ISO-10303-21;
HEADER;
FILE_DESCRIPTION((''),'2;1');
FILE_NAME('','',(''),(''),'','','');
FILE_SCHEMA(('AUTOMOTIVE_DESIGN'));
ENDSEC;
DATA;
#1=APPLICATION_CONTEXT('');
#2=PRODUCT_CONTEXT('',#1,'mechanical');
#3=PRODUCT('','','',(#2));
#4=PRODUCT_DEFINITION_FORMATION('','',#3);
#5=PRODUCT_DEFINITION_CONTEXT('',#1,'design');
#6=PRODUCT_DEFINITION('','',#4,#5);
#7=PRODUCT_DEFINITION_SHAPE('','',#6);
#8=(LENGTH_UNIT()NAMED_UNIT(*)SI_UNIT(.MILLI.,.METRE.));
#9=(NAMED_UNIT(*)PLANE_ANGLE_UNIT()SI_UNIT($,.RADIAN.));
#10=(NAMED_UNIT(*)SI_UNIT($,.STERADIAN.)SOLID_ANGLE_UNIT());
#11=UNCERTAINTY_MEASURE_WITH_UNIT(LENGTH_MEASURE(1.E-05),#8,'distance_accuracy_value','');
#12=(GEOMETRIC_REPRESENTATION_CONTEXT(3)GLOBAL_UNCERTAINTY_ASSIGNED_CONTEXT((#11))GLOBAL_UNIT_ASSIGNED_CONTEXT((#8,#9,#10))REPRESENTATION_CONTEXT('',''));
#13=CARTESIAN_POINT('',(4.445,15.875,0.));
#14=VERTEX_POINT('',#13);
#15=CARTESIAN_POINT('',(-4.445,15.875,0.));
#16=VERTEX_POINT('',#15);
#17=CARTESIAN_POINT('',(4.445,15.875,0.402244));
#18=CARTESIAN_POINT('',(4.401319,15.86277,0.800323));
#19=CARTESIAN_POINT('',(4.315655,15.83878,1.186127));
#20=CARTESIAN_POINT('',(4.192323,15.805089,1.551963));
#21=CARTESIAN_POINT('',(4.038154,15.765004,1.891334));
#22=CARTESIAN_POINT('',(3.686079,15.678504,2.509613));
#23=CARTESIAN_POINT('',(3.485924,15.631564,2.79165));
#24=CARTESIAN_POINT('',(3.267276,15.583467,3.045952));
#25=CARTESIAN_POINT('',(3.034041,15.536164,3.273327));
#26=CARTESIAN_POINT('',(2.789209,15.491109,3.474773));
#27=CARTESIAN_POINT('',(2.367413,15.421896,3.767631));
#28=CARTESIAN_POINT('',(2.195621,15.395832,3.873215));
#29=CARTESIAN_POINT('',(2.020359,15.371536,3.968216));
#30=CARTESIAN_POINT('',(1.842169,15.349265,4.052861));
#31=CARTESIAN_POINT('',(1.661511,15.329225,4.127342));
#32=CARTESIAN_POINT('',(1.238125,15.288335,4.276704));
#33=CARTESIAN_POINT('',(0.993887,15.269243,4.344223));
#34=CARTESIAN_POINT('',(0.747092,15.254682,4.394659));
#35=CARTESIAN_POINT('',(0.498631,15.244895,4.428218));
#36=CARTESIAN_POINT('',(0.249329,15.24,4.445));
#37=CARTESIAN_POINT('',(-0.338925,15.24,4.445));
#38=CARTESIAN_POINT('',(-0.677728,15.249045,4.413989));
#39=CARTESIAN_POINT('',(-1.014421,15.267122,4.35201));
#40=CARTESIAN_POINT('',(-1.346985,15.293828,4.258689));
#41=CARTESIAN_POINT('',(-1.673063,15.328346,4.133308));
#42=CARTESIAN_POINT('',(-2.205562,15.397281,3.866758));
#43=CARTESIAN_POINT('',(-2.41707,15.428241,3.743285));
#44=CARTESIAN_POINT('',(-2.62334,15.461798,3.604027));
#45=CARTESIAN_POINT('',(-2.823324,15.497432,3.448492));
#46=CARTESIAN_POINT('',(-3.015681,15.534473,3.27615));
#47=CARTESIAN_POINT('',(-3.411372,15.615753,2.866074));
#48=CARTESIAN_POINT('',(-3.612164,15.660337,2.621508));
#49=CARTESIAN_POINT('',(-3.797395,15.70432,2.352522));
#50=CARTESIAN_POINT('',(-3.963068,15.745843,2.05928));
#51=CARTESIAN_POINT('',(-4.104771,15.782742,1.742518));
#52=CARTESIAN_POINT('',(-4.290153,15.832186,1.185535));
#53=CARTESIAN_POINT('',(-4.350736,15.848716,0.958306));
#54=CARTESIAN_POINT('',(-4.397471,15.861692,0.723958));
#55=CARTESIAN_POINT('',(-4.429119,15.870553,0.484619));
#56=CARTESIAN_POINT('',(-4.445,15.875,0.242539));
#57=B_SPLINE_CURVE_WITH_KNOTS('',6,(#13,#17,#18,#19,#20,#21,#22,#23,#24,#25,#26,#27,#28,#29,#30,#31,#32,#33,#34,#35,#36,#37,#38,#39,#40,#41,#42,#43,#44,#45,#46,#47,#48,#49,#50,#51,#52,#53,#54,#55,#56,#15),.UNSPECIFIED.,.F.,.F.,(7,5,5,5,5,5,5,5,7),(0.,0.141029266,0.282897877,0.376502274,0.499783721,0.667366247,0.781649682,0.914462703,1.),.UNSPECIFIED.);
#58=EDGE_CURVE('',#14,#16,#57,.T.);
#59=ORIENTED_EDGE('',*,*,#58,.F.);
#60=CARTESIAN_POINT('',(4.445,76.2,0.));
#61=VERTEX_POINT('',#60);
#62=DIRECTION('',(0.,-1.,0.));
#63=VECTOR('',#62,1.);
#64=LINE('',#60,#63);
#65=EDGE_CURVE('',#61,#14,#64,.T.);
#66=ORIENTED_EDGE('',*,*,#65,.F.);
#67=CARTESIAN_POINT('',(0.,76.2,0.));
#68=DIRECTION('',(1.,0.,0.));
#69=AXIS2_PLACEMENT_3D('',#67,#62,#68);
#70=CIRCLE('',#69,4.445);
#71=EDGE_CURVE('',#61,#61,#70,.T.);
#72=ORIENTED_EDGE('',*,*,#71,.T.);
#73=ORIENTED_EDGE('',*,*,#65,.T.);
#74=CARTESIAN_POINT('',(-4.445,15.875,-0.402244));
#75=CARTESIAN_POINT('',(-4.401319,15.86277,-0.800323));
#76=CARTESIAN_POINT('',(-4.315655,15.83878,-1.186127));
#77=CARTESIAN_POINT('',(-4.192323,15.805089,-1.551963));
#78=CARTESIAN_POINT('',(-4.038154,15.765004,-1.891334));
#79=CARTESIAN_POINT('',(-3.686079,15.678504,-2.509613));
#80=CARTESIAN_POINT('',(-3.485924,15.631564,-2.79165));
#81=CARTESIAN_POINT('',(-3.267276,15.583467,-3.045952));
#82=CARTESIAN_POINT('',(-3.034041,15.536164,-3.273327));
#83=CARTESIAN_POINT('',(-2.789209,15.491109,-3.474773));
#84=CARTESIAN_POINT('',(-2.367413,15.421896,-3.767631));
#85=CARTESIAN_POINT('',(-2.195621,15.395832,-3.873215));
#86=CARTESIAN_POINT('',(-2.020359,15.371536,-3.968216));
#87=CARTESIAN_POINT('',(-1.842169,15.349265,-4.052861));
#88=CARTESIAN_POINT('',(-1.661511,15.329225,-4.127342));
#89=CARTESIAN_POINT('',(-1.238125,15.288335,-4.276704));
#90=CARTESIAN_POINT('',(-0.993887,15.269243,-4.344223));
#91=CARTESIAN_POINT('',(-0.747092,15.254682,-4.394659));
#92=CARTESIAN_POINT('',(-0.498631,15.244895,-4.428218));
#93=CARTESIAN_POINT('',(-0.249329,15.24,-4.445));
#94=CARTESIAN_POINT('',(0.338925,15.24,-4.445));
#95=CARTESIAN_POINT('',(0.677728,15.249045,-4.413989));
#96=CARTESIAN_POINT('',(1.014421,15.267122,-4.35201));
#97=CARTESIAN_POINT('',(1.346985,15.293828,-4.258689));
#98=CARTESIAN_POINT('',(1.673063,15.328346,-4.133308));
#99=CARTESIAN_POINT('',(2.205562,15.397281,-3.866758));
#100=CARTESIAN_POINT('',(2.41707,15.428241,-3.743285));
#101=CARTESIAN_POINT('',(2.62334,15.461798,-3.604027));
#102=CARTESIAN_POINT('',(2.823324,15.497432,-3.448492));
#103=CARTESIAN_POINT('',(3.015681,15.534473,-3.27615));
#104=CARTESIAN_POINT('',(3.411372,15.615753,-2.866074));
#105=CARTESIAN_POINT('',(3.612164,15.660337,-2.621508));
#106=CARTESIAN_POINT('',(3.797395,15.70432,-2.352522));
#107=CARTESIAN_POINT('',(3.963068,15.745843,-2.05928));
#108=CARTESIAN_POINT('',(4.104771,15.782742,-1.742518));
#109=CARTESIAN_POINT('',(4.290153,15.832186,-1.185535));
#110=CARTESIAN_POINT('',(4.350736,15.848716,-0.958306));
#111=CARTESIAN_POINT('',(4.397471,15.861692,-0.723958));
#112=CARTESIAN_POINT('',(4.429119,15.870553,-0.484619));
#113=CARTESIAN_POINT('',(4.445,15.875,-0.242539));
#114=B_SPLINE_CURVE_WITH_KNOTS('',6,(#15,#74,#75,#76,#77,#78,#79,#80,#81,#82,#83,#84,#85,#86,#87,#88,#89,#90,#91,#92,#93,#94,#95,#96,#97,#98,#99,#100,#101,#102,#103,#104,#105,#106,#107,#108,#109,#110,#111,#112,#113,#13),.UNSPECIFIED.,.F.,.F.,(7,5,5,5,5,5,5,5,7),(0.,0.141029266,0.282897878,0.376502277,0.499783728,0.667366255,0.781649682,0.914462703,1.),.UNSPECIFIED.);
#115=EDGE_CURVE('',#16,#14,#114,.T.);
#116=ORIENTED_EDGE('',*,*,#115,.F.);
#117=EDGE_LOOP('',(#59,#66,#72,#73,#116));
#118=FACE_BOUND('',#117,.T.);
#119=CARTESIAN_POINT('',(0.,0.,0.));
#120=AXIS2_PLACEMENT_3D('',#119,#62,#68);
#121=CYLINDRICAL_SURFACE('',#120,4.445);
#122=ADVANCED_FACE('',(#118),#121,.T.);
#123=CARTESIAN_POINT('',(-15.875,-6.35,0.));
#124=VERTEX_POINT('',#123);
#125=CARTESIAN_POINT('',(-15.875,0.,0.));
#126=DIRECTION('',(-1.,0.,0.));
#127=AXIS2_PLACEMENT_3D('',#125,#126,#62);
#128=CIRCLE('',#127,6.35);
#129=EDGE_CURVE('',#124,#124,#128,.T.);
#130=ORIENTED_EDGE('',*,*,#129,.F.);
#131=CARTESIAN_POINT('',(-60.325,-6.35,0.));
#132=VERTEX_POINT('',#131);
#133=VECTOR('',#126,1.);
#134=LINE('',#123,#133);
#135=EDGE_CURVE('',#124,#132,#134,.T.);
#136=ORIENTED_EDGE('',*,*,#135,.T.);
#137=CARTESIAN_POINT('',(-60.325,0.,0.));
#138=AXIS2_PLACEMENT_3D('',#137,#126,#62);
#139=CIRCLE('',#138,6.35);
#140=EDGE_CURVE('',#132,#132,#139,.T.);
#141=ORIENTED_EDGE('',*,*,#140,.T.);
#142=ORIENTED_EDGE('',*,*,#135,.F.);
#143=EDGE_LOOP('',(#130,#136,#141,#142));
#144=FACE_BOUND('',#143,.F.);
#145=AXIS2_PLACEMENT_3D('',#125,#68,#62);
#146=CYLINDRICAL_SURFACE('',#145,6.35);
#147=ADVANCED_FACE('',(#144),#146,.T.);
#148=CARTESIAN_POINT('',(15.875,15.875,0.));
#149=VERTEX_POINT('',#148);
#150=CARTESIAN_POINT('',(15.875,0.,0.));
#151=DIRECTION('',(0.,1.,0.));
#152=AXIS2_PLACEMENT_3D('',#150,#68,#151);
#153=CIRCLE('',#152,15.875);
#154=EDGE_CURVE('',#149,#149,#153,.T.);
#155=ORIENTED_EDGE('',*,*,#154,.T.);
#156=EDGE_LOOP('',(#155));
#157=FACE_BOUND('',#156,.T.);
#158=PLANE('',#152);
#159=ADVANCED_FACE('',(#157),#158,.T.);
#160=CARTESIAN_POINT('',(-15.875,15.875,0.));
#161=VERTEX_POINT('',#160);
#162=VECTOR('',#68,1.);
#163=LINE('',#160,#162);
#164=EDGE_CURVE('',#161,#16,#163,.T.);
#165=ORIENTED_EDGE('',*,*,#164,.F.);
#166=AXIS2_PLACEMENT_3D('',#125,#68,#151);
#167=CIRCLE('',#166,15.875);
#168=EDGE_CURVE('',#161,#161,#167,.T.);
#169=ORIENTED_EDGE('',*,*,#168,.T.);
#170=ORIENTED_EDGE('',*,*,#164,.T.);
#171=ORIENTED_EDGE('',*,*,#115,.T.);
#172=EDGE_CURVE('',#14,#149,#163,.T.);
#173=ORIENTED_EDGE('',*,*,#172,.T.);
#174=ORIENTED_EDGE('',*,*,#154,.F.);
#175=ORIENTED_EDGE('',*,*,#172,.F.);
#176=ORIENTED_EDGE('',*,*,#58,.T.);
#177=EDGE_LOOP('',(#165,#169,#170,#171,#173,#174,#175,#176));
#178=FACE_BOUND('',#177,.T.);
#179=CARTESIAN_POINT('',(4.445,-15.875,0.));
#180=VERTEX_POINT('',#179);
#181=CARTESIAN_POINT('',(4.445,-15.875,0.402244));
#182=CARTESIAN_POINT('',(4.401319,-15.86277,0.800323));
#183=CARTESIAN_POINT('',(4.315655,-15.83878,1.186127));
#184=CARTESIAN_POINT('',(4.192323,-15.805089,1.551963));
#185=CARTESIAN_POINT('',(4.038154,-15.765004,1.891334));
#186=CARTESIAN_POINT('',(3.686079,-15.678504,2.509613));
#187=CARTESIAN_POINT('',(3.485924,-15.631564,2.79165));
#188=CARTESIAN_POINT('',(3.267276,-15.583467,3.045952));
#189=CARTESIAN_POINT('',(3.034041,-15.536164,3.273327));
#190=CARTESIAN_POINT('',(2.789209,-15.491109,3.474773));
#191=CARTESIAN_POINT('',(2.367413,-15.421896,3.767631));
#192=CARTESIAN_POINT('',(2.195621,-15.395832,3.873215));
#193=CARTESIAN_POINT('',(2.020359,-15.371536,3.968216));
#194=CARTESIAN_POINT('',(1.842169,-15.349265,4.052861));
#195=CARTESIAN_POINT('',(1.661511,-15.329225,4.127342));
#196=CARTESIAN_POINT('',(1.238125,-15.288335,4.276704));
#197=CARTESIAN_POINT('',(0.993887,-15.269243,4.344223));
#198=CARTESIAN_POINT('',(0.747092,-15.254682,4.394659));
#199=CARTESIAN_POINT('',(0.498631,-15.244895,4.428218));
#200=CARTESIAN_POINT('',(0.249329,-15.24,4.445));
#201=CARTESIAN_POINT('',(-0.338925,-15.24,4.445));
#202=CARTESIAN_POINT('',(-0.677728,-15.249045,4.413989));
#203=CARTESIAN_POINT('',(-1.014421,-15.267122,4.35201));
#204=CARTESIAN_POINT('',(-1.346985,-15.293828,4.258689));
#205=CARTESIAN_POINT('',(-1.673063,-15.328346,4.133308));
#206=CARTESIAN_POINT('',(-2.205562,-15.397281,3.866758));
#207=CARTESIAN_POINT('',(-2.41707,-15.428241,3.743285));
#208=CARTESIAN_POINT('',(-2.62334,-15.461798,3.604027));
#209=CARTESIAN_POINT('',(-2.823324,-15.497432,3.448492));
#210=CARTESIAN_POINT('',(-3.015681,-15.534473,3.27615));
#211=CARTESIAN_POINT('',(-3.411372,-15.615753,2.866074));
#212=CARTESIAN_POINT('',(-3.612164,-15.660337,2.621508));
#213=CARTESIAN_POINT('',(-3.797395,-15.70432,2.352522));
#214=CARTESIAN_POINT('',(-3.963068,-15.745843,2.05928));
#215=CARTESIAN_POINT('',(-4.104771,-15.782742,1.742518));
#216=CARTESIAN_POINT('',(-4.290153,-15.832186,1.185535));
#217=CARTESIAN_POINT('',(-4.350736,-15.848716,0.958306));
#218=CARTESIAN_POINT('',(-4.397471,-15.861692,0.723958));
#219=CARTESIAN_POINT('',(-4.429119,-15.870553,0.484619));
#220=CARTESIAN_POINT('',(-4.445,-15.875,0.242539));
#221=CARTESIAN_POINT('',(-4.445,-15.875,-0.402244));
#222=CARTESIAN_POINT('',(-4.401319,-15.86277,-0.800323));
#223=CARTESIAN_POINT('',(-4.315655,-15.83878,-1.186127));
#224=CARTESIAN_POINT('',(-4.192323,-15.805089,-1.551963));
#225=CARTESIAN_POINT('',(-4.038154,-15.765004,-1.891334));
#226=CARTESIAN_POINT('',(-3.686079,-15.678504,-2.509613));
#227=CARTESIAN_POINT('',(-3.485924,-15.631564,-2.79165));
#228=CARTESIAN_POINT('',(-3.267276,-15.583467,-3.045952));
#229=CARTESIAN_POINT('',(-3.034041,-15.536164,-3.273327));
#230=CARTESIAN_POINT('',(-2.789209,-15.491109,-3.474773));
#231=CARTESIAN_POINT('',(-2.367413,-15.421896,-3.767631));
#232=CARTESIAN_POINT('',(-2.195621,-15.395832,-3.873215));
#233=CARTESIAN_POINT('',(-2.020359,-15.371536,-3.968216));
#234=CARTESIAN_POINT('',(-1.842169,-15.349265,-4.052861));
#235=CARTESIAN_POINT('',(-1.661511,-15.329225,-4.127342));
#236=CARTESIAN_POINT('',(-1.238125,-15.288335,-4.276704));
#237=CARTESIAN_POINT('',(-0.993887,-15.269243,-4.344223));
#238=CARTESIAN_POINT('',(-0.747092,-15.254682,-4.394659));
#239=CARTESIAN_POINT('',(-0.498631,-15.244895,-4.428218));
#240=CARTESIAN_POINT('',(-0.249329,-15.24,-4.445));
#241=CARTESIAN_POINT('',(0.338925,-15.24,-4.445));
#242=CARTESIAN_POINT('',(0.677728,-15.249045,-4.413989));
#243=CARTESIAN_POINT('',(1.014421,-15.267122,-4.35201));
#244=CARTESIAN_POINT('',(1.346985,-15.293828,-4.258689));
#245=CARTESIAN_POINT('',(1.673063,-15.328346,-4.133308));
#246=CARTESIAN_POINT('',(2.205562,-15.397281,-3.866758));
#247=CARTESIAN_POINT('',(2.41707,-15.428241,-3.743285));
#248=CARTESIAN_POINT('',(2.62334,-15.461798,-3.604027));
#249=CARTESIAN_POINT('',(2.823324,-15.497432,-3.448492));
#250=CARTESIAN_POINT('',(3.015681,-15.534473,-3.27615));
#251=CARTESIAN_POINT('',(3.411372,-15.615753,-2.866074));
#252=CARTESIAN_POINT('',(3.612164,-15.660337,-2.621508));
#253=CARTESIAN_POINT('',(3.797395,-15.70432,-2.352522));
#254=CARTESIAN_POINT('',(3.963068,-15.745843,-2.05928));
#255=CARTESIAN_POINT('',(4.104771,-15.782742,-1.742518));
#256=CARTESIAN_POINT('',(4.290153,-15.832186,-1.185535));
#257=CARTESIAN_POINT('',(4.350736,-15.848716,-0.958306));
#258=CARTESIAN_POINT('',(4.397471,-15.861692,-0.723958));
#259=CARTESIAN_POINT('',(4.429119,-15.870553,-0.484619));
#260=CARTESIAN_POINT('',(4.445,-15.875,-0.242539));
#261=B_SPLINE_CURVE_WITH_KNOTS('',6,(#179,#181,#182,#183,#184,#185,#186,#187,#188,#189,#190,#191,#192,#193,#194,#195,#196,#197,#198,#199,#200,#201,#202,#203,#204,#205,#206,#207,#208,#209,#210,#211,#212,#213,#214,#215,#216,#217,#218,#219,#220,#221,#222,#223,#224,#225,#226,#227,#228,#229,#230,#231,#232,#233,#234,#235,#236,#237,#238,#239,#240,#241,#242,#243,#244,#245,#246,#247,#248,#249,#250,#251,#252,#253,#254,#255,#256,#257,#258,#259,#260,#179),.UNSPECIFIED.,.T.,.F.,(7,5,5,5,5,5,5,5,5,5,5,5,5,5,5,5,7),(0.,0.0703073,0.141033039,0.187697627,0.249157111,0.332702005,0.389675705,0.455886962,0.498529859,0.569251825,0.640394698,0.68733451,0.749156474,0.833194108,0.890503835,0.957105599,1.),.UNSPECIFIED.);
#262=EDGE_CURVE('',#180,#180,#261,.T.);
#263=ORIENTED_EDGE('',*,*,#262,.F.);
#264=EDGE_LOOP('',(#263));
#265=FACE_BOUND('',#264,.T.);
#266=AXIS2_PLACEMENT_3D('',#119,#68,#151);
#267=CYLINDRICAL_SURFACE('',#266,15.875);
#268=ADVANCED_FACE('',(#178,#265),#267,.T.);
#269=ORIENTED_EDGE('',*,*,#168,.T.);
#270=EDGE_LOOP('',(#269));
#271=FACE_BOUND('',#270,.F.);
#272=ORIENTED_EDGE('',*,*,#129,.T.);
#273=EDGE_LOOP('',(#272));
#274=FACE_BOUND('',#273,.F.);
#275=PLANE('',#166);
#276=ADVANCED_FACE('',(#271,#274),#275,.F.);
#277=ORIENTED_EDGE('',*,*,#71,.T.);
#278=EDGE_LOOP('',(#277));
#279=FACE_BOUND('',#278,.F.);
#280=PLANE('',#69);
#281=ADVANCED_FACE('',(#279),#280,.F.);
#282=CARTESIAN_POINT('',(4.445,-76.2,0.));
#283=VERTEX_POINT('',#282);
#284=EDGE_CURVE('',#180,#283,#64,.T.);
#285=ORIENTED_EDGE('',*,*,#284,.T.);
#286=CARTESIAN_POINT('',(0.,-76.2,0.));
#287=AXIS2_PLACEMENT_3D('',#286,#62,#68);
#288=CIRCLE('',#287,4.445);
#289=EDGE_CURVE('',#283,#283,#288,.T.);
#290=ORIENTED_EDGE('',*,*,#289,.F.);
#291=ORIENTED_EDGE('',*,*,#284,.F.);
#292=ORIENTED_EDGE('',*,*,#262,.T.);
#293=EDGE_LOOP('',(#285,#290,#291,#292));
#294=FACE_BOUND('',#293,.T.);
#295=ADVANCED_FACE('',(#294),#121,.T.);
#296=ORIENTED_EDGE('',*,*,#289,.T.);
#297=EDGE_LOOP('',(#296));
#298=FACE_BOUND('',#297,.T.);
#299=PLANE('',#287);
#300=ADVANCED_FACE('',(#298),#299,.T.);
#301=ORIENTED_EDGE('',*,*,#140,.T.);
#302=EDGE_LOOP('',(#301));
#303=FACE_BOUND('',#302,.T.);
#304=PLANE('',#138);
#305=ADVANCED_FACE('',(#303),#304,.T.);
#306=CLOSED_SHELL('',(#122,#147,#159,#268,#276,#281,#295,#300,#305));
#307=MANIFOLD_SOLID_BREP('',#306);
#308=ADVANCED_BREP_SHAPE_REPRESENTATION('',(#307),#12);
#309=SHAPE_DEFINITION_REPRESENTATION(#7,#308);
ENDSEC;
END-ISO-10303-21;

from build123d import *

# Parameters (mm, degrees)
F0_R     = 15.875
F1_DEPTH = 15.875
F2_R     = 6.35
F3_DEPTH = 44.45
F4_R     = 4.445
F5_DEPTH = 76.2


# Not quite as in the source:
# - the program builds the solid bodies; features that only make, move or delete a surface that nothing else refers to are left out


with BuildPart() as f1:
    # F0 (on Right) → F1 (new body, symmetric)
    with BuildSketch(Plane.YZ):
        Circle(F0_R)
    extrude(amount=F1_DEPTH, both=True)

    # F2 (on face) → F3 (join)
    with BuildSketch(Plane(origin=(-15.875, 0, 0), x_dir=(0, -1, 0), z_dir=(-1, 0, 0))):
        Circle(F2_R)
    extrude(amount=F3_DEPTH)

    # F4 (on Front) → F5 (join, symmetric)
    with BuildSketch(Plane.XZ):
        Circle(F4_R)
    extrude(amount=F5_DEPTH, both=True)


solid = f1.part
